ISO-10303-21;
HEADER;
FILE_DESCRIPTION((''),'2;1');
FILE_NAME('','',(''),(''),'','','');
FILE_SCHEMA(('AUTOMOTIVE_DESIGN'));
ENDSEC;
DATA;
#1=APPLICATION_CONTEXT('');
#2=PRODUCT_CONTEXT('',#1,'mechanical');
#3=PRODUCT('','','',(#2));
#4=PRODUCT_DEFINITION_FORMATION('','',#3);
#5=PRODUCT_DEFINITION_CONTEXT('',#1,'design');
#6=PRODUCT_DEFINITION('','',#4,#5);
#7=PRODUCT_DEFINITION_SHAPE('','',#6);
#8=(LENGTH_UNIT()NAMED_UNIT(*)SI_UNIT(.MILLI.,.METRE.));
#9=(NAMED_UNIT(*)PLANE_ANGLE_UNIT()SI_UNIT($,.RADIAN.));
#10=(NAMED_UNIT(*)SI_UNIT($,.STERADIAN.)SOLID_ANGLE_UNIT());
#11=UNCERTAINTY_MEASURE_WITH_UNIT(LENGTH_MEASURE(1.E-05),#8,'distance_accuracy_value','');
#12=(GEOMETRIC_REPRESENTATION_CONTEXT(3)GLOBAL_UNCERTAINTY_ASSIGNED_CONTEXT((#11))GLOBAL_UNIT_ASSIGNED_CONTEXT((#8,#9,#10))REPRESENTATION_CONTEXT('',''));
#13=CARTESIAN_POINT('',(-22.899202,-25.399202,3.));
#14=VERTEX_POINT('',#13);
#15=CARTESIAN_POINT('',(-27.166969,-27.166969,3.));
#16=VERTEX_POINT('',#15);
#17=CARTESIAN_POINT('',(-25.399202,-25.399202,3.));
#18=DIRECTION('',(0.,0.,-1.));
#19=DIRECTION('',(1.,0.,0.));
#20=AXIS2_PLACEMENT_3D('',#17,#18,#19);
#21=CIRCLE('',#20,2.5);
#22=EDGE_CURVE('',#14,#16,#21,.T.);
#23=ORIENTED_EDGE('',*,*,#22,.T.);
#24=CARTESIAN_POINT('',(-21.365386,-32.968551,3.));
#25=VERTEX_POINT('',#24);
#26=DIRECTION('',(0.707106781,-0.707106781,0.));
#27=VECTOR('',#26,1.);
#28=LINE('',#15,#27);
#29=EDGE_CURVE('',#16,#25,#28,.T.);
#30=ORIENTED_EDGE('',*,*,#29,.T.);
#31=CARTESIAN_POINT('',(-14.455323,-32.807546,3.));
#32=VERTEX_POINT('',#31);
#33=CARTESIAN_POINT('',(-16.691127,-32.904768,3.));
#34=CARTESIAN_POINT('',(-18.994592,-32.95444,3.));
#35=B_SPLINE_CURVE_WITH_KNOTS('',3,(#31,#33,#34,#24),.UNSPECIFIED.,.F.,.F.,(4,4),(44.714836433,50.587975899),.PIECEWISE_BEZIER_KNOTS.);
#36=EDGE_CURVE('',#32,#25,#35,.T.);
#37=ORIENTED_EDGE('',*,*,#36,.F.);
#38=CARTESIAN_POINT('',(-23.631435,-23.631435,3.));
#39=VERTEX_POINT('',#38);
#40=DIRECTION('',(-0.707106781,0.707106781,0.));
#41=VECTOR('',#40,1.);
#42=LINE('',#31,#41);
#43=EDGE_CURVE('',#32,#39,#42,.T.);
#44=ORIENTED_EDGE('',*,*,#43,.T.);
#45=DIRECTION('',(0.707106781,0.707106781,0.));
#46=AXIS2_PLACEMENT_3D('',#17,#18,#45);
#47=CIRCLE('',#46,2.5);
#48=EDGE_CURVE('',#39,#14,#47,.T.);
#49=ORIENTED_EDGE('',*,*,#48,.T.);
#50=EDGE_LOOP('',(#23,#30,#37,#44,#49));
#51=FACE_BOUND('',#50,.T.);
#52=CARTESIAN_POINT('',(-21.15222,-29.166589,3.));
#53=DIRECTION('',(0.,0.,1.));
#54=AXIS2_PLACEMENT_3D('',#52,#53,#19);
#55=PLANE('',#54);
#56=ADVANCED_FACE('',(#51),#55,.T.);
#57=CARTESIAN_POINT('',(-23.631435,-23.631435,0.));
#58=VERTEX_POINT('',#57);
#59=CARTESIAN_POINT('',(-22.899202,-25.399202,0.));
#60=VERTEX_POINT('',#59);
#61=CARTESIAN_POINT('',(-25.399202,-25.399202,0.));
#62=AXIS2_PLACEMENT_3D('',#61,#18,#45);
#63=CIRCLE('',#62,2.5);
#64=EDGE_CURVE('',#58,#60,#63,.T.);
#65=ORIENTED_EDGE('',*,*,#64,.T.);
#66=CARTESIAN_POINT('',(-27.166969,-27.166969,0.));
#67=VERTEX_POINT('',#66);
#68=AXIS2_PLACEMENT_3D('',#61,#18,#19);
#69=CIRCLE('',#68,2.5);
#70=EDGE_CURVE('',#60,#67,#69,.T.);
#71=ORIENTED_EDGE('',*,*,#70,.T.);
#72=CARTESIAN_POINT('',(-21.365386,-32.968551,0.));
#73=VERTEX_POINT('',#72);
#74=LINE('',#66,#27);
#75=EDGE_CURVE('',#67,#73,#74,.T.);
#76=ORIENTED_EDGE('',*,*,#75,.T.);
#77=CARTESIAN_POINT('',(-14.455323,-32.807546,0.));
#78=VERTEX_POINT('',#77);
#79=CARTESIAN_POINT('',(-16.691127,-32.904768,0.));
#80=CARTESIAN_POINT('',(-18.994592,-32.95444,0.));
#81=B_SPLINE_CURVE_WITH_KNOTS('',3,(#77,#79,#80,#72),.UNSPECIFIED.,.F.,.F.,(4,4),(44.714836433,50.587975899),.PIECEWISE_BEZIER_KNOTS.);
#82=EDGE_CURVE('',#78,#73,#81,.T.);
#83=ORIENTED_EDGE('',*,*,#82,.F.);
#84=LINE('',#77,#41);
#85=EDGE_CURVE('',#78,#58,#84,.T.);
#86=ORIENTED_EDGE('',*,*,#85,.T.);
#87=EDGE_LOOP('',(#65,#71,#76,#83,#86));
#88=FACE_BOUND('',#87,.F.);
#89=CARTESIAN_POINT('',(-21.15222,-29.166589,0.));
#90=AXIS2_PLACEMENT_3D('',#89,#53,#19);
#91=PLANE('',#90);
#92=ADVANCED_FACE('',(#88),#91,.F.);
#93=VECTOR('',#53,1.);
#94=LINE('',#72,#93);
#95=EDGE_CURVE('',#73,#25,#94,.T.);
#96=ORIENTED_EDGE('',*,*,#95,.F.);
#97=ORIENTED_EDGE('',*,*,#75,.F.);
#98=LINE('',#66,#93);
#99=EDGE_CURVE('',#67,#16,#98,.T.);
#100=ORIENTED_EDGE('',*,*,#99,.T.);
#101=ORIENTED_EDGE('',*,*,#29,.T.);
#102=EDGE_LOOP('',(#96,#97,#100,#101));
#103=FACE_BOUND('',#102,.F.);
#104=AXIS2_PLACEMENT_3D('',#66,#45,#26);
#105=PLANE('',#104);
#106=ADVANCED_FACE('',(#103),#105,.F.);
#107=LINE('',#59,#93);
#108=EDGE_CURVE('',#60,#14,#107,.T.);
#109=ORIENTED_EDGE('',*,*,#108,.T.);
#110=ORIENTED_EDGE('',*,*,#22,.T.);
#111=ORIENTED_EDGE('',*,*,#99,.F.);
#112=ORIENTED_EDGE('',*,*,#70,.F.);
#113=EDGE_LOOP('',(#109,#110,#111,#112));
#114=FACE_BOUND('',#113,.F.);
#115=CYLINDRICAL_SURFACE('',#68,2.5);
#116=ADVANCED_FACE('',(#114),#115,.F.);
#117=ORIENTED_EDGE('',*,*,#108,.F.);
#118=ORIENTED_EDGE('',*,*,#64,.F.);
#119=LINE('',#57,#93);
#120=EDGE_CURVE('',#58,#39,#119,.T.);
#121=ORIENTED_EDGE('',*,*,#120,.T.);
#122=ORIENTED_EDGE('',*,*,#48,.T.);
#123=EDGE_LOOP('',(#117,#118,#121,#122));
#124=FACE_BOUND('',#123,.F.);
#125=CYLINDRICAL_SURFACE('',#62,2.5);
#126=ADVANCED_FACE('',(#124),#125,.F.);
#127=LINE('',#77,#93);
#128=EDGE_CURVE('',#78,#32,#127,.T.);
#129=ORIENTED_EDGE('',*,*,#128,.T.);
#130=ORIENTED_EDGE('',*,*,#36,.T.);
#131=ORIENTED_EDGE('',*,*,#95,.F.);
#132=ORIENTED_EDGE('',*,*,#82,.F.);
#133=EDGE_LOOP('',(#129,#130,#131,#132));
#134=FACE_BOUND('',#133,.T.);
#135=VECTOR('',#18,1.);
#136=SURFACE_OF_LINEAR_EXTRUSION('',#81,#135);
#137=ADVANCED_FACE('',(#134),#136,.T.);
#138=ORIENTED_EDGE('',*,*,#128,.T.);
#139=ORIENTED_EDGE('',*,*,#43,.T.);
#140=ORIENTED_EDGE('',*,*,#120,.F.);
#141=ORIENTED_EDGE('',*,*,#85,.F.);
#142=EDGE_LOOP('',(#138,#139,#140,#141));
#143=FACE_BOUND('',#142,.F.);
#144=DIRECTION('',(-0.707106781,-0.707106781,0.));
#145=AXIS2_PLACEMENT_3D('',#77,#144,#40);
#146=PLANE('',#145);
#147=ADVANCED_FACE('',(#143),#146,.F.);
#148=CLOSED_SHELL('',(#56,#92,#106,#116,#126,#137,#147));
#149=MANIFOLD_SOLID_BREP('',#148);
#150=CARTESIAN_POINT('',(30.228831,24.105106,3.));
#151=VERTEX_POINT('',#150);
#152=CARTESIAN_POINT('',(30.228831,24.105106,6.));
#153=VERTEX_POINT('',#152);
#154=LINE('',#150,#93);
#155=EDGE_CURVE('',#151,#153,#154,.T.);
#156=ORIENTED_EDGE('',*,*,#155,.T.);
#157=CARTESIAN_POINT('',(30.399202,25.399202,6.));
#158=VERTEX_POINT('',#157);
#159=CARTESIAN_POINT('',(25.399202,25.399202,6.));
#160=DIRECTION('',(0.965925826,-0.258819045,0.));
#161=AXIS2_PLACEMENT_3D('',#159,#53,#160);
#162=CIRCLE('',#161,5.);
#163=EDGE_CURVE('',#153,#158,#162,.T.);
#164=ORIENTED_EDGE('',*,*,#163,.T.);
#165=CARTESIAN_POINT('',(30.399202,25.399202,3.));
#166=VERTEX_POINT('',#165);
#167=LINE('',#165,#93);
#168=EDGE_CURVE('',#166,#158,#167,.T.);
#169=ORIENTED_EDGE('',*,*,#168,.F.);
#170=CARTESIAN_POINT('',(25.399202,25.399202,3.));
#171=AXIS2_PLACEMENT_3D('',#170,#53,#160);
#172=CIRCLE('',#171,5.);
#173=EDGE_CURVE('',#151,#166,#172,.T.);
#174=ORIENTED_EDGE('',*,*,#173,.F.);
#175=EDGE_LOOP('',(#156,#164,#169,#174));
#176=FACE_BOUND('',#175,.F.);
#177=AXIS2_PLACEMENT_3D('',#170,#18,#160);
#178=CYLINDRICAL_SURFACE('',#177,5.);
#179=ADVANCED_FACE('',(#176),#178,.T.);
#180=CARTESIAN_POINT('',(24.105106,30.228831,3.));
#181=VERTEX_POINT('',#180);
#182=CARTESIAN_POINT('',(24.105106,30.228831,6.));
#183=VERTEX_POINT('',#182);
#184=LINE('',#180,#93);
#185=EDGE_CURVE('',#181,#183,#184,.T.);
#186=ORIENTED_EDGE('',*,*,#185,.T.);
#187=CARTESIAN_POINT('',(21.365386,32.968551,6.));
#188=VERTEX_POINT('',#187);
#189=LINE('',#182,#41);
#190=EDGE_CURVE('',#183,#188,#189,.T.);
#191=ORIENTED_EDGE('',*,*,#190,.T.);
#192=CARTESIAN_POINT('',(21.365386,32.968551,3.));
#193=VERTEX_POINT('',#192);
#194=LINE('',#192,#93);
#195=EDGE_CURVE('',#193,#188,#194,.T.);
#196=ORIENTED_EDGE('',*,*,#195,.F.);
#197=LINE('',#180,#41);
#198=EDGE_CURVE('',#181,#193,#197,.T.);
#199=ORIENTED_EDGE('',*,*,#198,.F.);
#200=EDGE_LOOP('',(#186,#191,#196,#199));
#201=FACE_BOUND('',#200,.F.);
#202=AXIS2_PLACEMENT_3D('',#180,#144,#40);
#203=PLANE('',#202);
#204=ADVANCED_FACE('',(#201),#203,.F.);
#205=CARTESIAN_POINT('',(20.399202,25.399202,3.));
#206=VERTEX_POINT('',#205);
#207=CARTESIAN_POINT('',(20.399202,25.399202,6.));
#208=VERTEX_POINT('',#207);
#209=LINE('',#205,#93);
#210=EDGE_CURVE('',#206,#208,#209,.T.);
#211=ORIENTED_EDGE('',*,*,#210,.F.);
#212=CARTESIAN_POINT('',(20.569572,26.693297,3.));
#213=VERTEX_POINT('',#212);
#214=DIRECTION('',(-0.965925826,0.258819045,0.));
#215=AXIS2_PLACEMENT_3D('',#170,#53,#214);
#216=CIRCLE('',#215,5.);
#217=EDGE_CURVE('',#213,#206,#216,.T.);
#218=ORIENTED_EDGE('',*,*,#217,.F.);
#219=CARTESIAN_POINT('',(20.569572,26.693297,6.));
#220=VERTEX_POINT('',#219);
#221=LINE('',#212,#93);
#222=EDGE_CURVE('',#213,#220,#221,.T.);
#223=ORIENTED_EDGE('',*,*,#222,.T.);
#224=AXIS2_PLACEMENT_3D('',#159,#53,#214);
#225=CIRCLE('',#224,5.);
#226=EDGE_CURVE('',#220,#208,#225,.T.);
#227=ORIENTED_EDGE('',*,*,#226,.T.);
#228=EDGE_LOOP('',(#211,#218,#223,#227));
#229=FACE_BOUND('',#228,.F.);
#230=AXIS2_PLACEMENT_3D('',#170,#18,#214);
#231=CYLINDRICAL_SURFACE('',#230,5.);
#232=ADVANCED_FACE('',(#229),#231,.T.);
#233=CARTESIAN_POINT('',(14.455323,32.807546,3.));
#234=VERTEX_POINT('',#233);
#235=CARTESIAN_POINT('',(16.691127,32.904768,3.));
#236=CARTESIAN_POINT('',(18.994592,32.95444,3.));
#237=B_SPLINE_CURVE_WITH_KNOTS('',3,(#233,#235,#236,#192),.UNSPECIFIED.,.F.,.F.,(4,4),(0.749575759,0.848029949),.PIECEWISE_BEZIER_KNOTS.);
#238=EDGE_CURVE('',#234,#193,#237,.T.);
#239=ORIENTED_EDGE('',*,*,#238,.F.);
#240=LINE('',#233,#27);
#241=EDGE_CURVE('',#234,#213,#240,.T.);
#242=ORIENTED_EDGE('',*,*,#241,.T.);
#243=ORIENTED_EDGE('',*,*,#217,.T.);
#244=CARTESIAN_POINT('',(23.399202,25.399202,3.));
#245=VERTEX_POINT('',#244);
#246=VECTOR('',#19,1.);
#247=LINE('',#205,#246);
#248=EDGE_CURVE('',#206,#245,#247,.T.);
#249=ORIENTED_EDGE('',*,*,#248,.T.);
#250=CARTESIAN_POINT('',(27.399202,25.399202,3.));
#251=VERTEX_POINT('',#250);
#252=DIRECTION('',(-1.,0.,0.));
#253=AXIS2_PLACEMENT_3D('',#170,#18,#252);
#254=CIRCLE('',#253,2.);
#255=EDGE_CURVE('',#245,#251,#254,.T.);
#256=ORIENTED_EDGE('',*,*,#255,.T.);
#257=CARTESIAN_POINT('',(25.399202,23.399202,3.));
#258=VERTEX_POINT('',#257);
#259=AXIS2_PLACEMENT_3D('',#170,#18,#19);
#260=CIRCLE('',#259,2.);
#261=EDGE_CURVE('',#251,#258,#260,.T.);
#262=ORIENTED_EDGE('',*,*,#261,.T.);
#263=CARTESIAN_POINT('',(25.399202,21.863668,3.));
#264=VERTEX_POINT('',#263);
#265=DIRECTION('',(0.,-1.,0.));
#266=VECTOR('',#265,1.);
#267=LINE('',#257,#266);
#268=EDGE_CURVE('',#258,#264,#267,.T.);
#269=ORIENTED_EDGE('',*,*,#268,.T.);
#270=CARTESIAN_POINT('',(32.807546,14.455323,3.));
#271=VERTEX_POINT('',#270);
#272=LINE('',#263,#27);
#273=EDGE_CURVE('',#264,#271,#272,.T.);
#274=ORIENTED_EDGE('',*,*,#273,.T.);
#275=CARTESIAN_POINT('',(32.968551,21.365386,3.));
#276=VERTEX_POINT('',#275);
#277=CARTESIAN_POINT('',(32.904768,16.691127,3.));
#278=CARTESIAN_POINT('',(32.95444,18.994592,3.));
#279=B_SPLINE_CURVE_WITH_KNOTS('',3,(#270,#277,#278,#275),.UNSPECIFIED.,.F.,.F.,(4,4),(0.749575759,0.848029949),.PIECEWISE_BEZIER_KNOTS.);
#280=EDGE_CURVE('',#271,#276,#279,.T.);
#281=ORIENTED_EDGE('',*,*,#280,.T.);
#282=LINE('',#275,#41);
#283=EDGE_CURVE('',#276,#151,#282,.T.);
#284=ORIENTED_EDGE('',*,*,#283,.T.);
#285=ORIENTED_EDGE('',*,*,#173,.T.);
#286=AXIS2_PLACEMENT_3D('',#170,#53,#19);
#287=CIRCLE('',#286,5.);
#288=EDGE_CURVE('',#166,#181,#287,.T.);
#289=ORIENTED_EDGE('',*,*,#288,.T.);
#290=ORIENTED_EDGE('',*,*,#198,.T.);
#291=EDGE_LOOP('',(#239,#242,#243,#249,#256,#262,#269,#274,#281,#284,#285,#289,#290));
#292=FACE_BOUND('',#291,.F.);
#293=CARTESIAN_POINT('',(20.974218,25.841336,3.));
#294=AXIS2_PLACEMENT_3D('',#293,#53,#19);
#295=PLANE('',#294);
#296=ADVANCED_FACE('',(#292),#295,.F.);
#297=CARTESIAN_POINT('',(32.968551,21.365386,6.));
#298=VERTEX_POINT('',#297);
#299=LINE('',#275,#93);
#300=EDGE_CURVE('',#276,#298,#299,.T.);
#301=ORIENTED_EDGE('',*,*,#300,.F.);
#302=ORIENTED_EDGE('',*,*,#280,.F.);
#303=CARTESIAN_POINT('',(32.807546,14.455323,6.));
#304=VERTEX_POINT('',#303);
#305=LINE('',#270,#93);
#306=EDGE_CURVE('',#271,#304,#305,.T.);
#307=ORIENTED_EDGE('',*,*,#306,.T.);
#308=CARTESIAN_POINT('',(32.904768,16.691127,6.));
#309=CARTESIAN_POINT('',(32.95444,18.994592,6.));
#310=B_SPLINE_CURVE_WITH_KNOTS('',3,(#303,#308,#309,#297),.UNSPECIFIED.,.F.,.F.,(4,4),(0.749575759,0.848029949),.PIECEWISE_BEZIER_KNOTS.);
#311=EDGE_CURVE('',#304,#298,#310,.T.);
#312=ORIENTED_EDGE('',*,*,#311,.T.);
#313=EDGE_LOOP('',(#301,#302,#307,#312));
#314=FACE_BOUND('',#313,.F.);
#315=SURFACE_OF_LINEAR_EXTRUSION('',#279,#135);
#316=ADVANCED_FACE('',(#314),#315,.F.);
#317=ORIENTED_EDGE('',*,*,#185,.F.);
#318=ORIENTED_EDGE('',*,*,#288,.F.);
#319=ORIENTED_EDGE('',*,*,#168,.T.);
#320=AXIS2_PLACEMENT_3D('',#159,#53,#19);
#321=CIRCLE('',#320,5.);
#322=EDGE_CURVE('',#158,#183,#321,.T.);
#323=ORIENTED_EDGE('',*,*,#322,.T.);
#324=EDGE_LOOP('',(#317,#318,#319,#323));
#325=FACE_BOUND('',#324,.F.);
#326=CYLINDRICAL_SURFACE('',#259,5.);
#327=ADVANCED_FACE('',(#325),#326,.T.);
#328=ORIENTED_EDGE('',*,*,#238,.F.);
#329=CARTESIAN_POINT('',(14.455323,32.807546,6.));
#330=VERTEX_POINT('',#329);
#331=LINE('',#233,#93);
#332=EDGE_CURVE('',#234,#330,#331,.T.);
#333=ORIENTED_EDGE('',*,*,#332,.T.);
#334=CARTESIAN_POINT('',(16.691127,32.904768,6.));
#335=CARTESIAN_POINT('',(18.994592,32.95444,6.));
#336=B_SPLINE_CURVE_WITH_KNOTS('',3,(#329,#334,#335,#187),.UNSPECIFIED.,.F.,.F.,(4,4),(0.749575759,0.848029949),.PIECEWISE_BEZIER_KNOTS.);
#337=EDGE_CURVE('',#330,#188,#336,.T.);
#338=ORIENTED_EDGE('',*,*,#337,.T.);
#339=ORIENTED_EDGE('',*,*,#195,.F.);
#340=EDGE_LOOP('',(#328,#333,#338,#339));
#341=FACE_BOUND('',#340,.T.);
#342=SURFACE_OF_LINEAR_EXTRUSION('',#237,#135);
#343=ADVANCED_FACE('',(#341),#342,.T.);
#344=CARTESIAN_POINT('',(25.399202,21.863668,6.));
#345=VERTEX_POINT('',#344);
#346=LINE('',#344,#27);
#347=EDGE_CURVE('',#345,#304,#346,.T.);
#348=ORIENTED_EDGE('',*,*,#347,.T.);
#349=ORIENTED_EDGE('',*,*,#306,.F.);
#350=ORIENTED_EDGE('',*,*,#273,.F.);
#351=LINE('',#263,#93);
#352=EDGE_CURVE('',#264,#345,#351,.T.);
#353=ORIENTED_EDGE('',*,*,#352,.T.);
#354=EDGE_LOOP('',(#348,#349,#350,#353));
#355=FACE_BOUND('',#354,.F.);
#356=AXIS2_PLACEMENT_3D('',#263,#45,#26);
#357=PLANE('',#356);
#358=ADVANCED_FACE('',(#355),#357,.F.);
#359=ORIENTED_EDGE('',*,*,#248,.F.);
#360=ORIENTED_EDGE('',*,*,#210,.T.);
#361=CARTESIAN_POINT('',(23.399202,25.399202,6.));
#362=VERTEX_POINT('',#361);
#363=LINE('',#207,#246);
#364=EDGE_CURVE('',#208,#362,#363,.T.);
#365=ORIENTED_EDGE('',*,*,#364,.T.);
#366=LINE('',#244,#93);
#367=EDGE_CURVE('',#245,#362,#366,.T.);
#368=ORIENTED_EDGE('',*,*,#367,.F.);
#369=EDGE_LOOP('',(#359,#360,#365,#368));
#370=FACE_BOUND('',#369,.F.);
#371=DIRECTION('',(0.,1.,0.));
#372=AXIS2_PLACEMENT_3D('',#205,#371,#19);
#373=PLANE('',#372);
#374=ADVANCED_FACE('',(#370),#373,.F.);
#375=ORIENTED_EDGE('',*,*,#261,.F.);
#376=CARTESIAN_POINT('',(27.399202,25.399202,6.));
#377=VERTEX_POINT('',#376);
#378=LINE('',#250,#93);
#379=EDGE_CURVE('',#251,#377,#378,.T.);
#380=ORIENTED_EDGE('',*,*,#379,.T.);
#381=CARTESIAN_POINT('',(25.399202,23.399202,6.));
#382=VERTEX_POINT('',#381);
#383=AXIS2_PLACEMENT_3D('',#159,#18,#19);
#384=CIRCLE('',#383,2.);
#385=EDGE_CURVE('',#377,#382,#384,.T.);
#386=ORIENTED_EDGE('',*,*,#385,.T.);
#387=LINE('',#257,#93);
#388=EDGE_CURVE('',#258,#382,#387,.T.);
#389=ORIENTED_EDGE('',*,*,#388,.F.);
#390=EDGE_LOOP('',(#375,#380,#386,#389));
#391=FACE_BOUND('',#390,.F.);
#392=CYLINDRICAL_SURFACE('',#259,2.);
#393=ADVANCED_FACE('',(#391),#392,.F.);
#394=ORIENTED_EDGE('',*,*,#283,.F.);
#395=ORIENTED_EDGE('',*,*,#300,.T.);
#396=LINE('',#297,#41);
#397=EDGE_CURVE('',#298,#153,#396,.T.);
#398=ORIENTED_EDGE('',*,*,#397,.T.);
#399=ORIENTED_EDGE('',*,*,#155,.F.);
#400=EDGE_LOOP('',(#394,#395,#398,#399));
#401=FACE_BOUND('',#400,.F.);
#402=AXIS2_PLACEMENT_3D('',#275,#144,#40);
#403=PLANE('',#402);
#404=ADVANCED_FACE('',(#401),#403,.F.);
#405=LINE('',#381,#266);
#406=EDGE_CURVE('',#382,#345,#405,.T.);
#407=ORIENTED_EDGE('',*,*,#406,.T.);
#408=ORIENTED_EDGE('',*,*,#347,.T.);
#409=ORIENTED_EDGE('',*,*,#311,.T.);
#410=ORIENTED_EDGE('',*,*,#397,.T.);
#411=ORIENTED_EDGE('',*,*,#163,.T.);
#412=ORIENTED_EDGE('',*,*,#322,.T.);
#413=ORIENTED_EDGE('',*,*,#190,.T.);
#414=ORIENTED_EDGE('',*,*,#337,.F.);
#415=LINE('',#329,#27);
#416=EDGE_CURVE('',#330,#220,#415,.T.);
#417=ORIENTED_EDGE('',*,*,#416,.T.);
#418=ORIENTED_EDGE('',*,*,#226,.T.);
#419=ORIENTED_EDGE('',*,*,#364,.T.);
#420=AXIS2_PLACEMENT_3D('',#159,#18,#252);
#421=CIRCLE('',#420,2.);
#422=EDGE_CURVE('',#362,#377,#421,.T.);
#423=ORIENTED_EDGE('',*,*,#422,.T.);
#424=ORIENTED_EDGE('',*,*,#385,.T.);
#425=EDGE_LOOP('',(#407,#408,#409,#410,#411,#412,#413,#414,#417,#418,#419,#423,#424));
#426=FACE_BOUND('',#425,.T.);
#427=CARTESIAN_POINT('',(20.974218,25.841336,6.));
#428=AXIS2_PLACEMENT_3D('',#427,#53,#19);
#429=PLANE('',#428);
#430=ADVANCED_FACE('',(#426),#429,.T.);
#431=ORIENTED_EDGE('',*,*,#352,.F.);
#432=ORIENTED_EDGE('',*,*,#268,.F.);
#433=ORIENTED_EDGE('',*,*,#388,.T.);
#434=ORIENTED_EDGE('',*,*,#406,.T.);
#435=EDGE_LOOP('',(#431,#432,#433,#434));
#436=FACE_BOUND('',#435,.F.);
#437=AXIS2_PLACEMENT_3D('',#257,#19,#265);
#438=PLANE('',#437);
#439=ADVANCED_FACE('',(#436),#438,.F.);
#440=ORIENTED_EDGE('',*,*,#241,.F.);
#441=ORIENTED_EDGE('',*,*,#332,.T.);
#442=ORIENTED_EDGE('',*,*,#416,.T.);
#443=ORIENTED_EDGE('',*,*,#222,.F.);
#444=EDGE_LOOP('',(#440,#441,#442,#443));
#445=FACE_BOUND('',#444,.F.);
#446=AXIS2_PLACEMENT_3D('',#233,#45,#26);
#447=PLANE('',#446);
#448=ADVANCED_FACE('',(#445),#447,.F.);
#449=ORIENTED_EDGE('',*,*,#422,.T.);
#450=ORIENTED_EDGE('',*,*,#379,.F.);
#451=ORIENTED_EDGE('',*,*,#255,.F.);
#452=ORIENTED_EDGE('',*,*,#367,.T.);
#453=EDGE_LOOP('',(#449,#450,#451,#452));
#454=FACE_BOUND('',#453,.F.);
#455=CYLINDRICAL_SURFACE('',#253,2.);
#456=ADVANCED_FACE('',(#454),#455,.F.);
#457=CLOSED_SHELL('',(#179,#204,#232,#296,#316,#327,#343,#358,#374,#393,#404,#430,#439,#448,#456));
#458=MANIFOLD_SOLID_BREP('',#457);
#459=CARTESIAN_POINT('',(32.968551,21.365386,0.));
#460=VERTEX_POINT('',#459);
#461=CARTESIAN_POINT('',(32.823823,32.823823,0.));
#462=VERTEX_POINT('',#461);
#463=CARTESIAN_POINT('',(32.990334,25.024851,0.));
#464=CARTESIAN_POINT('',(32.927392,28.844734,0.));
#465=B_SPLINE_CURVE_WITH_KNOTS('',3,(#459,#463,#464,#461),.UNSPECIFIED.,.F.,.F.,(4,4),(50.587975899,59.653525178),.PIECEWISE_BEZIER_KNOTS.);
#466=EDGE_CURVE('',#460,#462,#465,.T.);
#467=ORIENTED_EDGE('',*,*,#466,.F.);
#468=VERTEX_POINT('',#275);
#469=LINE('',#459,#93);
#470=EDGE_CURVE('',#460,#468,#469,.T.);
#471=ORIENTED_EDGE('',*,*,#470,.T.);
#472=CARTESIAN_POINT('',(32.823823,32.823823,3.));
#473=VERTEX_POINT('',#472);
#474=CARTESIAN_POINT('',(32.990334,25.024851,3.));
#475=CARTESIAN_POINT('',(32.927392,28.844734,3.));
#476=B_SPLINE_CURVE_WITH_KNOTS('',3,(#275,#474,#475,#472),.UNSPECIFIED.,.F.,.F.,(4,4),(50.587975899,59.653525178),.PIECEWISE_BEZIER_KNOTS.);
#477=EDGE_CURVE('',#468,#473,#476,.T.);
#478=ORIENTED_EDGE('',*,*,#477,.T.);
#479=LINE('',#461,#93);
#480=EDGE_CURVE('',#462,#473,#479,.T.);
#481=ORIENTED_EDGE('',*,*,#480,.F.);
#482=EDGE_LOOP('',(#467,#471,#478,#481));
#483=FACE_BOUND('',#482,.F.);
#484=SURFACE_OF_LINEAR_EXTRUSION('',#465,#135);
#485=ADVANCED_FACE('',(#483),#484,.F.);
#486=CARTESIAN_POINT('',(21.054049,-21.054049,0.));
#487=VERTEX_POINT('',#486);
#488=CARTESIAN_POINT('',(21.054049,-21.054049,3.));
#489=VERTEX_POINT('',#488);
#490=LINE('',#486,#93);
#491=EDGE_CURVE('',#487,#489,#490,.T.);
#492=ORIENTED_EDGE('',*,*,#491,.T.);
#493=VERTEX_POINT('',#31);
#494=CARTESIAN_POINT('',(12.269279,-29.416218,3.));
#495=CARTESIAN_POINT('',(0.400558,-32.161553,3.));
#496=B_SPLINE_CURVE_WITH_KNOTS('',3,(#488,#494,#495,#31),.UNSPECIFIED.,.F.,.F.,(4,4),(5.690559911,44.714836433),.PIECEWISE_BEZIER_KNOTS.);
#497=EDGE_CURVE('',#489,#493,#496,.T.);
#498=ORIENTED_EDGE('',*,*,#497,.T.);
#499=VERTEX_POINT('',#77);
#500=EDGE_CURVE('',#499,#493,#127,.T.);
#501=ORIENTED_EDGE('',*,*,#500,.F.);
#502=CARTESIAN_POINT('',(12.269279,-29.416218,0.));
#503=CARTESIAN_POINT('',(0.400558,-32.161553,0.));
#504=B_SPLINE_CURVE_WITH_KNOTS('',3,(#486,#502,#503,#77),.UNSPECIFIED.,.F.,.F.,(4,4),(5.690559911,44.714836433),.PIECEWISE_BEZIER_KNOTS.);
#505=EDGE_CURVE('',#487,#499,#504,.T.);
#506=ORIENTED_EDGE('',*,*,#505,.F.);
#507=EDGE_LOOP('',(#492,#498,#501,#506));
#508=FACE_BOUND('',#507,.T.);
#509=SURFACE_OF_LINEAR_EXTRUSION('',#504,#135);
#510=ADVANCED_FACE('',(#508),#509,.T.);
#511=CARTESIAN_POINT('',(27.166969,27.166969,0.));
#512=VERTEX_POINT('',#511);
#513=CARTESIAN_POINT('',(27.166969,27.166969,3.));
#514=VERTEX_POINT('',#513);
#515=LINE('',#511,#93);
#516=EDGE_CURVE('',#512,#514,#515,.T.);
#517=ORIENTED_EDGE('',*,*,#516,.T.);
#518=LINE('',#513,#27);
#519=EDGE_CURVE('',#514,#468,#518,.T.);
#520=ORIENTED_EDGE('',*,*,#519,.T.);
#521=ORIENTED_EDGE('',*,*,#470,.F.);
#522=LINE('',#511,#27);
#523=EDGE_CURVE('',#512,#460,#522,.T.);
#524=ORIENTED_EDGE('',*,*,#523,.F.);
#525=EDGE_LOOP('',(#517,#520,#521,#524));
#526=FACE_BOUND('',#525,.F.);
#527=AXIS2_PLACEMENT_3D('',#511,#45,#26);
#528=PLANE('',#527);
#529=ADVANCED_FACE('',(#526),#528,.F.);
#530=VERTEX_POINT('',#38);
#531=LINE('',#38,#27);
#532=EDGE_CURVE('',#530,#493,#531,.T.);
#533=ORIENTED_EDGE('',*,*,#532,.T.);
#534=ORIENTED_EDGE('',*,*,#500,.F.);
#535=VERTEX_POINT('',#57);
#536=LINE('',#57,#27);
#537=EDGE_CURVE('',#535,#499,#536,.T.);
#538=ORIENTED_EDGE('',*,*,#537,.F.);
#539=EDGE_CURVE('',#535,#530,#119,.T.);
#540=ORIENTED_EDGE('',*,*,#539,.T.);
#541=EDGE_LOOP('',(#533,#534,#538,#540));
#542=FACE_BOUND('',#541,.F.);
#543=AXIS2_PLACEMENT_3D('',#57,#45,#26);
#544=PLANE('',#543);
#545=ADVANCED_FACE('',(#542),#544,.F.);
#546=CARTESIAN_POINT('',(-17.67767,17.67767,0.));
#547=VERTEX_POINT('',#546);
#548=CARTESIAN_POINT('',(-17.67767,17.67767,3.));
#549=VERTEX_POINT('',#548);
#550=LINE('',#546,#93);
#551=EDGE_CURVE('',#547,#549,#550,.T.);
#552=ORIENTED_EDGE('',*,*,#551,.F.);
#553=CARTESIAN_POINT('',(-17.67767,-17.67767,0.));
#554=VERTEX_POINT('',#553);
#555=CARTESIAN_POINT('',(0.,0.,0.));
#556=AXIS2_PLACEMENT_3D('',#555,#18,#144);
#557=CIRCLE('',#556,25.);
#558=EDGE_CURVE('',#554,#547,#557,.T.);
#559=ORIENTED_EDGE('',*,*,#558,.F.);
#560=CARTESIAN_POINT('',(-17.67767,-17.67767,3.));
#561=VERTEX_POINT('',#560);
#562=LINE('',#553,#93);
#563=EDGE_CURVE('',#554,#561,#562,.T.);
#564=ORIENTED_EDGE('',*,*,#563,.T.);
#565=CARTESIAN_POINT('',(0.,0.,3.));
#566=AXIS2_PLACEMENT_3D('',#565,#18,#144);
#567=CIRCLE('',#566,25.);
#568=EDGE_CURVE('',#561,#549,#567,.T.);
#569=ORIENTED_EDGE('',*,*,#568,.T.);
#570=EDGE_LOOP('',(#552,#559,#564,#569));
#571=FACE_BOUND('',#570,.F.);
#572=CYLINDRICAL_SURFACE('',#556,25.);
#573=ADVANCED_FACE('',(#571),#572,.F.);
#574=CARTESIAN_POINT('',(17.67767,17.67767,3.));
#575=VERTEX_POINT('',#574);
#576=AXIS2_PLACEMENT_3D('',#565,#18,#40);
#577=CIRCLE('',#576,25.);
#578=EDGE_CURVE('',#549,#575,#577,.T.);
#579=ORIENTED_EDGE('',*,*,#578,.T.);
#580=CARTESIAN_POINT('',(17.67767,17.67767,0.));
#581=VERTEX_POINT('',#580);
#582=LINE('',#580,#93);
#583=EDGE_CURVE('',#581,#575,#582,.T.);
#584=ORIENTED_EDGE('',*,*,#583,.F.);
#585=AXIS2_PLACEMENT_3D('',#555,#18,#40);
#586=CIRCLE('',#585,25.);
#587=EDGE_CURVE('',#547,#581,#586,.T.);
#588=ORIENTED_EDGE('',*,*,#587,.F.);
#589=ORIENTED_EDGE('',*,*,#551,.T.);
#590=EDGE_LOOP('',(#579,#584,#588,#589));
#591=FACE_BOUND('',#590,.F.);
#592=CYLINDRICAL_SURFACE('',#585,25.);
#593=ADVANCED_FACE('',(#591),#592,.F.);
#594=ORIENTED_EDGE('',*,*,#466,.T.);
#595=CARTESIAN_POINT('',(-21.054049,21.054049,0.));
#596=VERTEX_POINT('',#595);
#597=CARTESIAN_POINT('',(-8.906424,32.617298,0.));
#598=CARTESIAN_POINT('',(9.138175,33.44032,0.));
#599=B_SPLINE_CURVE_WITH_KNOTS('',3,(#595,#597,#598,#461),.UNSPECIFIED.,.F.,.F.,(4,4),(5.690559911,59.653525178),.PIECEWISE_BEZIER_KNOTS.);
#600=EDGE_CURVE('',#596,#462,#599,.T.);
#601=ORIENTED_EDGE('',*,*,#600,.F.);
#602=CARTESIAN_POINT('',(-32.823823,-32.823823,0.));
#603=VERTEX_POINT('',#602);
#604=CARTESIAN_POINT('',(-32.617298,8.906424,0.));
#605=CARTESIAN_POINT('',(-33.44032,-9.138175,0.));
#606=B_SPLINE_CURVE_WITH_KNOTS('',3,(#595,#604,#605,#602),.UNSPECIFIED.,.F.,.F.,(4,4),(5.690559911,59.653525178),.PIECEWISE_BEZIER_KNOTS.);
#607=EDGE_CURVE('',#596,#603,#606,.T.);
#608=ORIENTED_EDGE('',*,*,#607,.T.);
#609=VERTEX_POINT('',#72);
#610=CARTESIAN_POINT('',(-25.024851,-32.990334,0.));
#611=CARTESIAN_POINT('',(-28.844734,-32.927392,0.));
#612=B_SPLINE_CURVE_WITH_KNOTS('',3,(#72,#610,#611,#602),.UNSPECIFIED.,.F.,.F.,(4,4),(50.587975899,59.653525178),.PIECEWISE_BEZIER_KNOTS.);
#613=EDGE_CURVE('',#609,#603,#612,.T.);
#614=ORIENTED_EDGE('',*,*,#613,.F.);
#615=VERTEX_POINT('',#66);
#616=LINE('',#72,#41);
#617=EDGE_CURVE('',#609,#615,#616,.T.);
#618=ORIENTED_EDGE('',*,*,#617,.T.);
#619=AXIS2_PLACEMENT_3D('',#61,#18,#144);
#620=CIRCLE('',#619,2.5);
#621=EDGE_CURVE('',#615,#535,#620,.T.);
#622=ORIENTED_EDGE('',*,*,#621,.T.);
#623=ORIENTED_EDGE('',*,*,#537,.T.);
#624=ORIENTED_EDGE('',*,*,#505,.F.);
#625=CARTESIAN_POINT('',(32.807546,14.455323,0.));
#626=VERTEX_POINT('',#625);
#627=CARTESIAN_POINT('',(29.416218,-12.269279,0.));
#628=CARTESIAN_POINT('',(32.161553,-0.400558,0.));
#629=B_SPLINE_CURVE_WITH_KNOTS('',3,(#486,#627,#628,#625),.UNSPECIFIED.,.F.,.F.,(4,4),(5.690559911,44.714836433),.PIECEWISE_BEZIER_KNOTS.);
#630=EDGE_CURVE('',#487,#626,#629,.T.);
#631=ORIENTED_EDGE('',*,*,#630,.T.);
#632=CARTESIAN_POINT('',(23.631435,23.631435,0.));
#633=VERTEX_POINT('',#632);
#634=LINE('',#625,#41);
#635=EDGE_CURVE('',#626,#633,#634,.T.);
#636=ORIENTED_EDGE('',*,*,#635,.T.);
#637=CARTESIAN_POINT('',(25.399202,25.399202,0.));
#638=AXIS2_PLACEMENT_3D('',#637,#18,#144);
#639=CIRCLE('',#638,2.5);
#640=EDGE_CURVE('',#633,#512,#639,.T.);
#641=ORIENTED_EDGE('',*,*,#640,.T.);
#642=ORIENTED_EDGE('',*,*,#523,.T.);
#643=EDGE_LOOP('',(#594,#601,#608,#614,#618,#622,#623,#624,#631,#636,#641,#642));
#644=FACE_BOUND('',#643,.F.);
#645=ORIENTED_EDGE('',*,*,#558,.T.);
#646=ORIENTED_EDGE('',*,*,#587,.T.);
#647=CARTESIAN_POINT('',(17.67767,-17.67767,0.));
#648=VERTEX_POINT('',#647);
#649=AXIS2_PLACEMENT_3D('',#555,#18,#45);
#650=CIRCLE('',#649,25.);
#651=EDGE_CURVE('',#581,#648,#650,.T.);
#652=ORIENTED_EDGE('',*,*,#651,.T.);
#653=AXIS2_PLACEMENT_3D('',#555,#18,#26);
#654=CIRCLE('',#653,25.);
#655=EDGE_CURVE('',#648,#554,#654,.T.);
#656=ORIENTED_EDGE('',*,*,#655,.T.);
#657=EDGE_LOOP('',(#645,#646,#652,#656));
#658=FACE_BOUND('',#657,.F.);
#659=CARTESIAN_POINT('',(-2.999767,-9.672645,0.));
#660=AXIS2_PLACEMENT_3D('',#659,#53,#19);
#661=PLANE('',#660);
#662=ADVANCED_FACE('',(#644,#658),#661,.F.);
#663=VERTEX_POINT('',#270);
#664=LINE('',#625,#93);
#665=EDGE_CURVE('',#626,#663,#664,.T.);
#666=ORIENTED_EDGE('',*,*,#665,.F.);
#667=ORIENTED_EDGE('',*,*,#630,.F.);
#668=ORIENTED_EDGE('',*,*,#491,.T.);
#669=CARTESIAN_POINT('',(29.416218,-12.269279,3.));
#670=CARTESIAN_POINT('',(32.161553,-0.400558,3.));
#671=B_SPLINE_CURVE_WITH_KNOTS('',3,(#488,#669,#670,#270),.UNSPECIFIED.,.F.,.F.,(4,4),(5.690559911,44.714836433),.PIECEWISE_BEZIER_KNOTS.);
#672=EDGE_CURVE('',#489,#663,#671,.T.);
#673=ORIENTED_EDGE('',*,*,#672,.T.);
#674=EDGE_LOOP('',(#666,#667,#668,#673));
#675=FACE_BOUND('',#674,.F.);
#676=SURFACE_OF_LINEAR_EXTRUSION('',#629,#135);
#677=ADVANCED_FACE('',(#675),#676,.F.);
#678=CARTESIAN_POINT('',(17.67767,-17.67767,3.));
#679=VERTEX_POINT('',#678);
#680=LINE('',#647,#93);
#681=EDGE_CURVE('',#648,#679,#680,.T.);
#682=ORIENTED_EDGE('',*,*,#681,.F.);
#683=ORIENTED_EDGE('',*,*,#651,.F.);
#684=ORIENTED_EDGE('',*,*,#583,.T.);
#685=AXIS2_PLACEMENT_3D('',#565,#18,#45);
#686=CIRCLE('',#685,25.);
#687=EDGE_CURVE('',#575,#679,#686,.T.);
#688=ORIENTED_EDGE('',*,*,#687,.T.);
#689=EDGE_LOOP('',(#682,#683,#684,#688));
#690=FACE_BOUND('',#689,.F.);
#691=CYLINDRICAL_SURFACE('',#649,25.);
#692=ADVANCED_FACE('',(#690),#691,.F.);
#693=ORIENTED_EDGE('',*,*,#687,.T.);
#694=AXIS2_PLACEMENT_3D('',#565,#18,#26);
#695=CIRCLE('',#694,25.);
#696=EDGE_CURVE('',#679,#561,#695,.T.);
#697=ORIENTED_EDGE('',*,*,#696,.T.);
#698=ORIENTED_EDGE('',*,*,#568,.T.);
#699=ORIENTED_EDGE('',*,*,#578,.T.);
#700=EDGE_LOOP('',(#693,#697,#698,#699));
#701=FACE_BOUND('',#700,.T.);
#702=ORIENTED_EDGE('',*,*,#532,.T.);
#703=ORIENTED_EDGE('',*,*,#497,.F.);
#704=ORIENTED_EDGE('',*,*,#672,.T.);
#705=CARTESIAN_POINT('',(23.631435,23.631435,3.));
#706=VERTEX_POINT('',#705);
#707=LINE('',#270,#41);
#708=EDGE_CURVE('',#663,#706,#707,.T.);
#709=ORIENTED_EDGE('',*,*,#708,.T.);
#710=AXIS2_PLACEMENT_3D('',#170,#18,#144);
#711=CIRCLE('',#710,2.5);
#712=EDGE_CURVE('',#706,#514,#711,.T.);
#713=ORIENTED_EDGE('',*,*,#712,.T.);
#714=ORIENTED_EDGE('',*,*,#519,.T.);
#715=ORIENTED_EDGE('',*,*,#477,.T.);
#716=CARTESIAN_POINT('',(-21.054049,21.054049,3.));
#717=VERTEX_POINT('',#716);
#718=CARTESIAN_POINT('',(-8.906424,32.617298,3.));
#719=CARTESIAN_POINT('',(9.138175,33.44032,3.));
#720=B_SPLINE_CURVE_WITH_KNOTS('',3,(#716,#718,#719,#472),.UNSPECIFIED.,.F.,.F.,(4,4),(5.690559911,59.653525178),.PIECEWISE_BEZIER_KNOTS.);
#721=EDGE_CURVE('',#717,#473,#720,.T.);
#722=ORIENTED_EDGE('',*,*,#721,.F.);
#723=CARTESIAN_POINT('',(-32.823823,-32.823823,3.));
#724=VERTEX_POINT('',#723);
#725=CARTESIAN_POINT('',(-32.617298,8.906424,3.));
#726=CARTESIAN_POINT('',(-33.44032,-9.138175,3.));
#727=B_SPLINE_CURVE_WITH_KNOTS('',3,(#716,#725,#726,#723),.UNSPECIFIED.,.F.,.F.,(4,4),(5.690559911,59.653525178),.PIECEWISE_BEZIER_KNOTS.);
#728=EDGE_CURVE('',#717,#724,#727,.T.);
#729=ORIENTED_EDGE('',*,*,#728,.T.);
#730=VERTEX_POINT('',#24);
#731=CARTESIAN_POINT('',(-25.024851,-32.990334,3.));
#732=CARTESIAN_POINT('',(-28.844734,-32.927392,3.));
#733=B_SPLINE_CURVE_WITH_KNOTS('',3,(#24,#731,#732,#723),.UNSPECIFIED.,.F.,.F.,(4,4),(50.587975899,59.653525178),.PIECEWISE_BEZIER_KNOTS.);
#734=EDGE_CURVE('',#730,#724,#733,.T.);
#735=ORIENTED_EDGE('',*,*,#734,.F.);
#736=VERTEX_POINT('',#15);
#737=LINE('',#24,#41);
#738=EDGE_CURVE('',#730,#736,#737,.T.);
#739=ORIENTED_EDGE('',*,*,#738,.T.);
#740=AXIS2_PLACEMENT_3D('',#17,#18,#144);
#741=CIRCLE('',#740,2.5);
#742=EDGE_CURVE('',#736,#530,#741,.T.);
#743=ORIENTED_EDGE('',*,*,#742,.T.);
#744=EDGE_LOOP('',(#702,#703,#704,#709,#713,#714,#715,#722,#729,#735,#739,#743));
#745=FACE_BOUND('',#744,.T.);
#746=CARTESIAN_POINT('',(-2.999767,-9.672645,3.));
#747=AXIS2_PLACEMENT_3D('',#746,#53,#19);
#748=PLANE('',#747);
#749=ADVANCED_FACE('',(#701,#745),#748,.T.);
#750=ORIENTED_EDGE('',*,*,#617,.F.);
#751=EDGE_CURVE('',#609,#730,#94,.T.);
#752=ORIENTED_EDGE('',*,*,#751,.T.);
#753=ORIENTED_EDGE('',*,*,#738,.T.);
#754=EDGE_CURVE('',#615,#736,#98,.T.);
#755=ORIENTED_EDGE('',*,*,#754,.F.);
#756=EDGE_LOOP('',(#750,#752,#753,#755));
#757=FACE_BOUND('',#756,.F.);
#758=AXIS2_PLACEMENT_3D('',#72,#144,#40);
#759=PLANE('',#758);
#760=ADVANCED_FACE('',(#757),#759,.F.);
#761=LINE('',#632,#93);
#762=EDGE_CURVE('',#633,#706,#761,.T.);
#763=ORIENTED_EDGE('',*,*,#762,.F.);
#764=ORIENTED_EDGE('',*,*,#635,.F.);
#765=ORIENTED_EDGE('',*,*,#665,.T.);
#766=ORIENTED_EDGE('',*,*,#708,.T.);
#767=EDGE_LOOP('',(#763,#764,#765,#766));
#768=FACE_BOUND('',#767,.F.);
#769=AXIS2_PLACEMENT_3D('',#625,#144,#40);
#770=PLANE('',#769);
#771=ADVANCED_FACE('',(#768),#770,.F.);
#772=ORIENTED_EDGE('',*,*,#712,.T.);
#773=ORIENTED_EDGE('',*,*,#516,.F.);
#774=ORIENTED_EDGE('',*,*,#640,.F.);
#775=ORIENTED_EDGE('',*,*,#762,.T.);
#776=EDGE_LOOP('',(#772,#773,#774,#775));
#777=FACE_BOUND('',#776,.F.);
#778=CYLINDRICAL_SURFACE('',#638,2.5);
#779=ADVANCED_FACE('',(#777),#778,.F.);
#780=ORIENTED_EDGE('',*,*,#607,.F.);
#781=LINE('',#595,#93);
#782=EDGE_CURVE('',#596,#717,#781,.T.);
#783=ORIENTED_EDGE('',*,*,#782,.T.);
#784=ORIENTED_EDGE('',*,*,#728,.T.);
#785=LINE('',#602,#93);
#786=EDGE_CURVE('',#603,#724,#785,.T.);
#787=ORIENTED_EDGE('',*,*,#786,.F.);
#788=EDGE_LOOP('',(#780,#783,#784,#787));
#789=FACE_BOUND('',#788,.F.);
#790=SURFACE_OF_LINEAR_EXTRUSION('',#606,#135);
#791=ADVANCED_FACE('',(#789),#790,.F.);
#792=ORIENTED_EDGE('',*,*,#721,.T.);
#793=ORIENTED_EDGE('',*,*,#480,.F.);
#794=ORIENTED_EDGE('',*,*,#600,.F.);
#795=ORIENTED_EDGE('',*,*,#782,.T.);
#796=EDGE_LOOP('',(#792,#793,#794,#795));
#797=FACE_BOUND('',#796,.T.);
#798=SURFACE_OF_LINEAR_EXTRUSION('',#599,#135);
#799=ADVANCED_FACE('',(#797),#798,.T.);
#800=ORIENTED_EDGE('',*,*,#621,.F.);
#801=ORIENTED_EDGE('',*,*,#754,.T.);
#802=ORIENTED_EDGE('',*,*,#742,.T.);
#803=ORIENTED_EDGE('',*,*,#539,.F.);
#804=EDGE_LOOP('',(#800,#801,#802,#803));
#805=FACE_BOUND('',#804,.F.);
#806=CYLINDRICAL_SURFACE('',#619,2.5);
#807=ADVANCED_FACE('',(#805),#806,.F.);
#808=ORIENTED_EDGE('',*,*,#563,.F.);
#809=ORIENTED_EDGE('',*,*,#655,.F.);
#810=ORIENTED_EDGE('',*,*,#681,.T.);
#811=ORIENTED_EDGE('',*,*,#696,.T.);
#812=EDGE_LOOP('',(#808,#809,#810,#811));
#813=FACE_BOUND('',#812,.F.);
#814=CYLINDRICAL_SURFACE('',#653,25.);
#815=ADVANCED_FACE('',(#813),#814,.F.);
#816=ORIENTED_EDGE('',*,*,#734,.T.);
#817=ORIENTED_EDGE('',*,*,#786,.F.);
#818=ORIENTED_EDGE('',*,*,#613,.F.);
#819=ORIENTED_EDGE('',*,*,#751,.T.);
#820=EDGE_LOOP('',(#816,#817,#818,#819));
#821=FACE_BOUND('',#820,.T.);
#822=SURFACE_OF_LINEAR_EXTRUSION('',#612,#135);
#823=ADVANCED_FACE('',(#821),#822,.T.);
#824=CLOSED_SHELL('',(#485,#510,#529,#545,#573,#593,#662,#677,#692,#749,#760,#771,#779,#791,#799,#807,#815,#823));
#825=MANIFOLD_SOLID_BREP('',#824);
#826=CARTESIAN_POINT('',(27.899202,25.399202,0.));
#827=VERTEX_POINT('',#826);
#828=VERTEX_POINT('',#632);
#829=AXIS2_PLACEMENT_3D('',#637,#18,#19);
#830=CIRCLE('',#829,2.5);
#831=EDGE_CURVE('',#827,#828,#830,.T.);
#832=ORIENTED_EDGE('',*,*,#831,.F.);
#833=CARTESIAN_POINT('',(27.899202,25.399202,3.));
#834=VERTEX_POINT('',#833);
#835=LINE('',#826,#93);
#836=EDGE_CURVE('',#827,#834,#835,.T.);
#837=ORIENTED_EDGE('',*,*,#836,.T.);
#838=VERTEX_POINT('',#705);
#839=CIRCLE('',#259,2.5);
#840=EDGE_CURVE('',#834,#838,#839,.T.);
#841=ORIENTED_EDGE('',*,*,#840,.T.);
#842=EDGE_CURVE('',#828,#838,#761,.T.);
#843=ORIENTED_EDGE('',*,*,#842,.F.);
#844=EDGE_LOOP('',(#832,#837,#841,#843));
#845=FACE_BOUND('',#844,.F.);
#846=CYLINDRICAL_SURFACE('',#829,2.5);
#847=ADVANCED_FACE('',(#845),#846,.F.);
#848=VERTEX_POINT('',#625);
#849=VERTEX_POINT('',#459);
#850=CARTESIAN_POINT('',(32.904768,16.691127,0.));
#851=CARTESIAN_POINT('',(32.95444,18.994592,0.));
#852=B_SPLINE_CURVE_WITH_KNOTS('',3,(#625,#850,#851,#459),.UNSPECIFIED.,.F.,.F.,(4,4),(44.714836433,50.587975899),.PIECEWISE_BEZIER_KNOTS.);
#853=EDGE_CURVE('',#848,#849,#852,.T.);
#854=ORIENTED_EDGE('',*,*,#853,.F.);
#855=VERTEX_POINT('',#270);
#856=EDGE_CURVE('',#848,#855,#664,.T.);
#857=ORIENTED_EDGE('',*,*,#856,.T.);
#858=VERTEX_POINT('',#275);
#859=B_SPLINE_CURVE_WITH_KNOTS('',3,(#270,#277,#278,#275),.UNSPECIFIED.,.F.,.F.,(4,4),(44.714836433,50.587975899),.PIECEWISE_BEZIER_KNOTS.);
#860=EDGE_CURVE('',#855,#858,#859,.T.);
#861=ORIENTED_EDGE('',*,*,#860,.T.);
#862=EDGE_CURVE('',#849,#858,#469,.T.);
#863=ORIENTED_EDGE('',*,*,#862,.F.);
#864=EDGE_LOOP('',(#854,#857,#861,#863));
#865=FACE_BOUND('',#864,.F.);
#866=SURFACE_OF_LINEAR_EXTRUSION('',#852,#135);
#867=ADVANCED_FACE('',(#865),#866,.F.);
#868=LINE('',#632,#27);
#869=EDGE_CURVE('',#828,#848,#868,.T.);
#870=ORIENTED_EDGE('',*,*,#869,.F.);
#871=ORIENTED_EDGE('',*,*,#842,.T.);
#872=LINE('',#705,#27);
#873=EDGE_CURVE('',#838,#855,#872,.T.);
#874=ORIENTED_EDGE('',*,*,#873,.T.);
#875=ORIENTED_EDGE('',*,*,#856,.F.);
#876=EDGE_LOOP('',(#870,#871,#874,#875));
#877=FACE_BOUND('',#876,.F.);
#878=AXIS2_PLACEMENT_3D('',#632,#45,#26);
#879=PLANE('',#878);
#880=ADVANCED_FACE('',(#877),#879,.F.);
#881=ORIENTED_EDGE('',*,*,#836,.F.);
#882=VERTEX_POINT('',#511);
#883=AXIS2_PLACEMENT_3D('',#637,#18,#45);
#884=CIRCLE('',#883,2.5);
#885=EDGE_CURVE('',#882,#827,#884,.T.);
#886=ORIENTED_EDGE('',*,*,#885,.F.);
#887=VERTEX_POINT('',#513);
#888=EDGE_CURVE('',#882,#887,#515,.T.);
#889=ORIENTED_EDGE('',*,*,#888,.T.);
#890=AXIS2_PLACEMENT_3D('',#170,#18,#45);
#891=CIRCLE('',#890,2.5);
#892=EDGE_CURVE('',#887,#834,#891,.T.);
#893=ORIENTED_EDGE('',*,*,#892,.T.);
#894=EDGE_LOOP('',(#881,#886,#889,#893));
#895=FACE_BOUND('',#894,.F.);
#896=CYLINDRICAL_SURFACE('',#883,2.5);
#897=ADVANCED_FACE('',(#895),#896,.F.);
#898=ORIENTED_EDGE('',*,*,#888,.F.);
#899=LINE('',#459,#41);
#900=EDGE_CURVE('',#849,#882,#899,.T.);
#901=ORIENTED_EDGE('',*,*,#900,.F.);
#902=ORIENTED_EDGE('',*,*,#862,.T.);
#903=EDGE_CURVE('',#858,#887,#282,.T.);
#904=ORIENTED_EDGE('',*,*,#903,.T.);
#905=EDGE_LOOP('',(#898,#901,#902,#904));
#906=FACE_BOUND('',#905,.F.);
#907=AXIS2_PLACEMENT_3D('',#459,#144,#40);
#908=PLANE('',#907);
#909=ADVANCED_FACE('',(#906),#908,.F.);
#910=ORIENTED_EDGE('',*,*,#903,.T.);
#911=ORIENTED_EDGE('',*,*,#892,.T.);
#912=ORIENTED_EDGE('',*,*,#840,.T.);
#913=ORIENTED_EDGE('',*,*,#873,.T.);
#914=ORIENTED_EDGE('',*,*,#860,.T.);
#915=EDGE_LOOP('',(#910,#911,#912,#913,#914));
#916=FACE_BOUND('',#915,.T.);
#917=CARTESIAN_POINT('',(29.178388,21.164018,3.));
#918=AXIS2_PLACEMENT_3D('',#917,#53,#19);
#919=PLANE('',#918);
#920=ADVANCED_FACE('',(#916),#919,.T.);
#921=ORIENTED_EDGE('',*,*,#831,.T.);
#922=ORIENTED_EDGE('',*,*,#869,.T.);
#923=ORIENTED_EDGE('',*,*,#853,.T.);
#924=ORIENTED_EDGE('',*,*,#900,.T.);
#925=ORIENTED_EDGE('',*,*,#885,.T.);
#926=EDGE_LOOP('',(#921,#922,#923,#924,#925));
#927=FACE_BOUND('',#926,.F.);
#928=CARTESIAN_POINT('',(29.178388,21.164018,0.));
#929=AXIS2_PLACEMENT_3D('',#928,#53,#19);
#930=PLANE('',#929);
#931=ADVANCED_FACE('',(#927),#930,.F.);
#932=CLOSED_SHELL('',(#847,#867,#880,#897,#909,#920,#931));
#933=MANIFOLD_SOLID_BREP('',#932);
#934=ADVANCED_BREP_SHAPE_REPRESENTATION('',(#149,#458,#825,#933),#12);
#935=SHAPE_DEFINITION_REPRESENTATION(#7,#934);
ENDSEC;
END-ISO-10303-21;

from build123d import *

# Parameters (mm, degrees)
F1_DEPTH = 3
F2_DEPTH = 3
F4_DEPTH = 3


with BuildPart() as f1:
    # F0 (on Top) → F1 (new body)
    with BuildSketch(Plane.XY):
        with BuildLine():
            Line((-17.6776695297, 17.6776695297), (-21.0540489196, 21.0540489196))
            add(Edge.make_bspline(
                [(-21.0540489196, 21.0540489196), (-32.6172978292, 8.9064244237), (-33.4403195997, -9.1381745127), (-32.823822752, -32.823822752)],
                knots=[5.6905599108, 5.6905599108, 5.6905599108, 5.6905599108, 59.653525178, 59.653525178, 59.653525178, 59.653525178], degree=3))
            add(Edge.make_bspline(
                [(-21.3653856494, -32.9685513557), (-25.0248508067, -32.9903335411), (-28.8447343113, -32.9273916076), (-32.823822752, -32.823822752)],
                knots=[50.5879758987, 50.5879758987, 50.5879758987, 50.5879758987, 59.653525178, 59.653525178, 59.653525178, 59.653525178], degree=3))
            Line((-21.3653856494, -32.9685513557), (-27.1669685025, -27.1669685025))
            ThreePointArc((-27.1669685025, -27.1669685025), (-27.1669685025, -23.6314345966), (-23.6314345966, -23.6314345966))
            Line((-23.6314345966, -23.6314345966), (-14.4553227676, -32.8075464256))
            add(Edge.make_bspline(
                [(21.0540489196, -21.0540489196), (12.269278567, -29.4162176905), (0.400558033, -32.1615526479), (-14.4553227676, -32.8075464256)],
                knots=[5.6905599108, 5.6905599108, 5.6905599108, 5.6905599108, 44.7148364329, 44.7148364329, 44.7148364329, 44.7148364329], degree=3))
            add(Edge.make_bspline(
                [(21.0540489196, -21.0540489196), (29.4162176905, -12.269278567), (32.1615526479, -0.400558033), (32.8075464256, 14.4553227676)],
                knots=[5.6905599108, 5.6905599108, 5.6905599108, 5.6905599108, 44.7148364329, 44.7148364329, 44.7148364329, 44.7148364329], degree=3))
            Line((32.8075464256, 14.4553227676), (23.6314345966, 23.6314345966))
            Line((23.6314345966, 23.6314345966), (17.6776695297, 17.6776695297))
            ThreePointArc((17.6776695297, 17.6776695297), (25, 0), (17.6776695297, -17.6776695297))
            ThreePointArc((17.6776695297, -17.6776695297), (0, -25), (-17.6776695297, -17.6776695297))
            ThreePointArc((-17.6776695297, -17.6776695297), (-25, 0), (-17.6776695297, 17.6776695297))
        make_face()
        with BuildLine():
            add(Edge.make_bspline(
                [(-21.0540489196, 21.0540489196), (-8.9064244237, 32.6172978292), (9.1381745127, 33.4403195997), (32.823822752, 32.823822752)],
                knots=[5.6905599108, 5.6905599108, 5.6905599108, 5.6905599108, 59.653525178, 59.653525178, 59.653525178, 59.653525178], degree=3))
            Line((-21.0540489196, 21.0540489196), (-17.6776695297, 17.6776695297))
            ThreePointArc((-17.6776695297, 17.6776695297), (0, 25), (17.6776695297, 17.6776695297))
            Line((17.6776695297, 17.6776695297), (23.6314345966, 23.6314345966))
            ThreePointArc((23.6314345966, 23.6314345966), (23.6314345966, 27.1669685025), (27.1669685025, 27.1669685025))
            Line((27.1669685025, 27.1669685025), (32.823822752, 32.823822752))
        make_face()
        with BuildLine():
            add(Edge.make_bspline(
                [(32.9685513557, 21.3653856494), (32.9903335411, 25.0248508067), (32.9273916076, 28.8447343113), (32.823822752, 32.823822752)],
                knots=[50.5879758987, 50.5879758987, 50.5879758987, 50.5879758987, 59.653525178, 59.653525178, 59.653525178, 59.653525178], degree=3))
            Line((32.823822752, 32.823822752), (27.1669685025, 27.1669685025))
            Line((27.1669685025, 27.1669685025), (32.9685513557, 21.3653856494))
        make_face()
    extrude(amount=F1_DEPTH)


with BuildPart() as f2:
    # F0 (on Top) → F2 (new body)
    with BuildSketch(Plane.XY):
        with BuildLine():
            Line((32.9685513557, 21.3653856494), (27.1669685025, 27.1669685025))
            ThreePointArc((27.1669685025, 27.1669685025), (27.7089003809, 26.3559101305), (27.8992015496, 25.3992015496))
            ThreePointArc((27.8992015496, 25.3992015496), (26.3559101305, 23.0895027183), (23.6314345966, 23.6314345966))
            Line((23.6314345966, 23.6314345966), (32.8075464256, 14.4553227676))
            add(Edge.make_bspline(
                [(32.8075464256, 14.4553227676), (32.9047682549, 16.6911274411), (32.9544397107, 18.9945917154), (32.9685513557, 21.3653856494)],
                knots=[44.7148364329, 44.7148364329, 44.7148364329, 44.7148364329, 50.5879758987, 50.5879758987, 50.5879758987, 50.5879758987], degree=3))
        make_face()
    extrude(amount=F2_DEPTH)


with BuildPart() as f2b:
    # F0 (on Top) → F2, piece 2 (new body)
    with BuildSketch(Plane.XY):
        with BuildLine():
            Line((-27.1669685025, -27.1669685025), (-21.3653856494, -32.9685513557))
            add(Edge.make_bspline(
                [(-14.4553227676, -32.8075464256), (-16.6911274411, -32.9047682549), (-18.9945917154, -32.9544397107), (-21.3653856494, -32.9685513557)],
                knots=[44.7148364329, 44.7148364329, 44.7148364329, 44.7148364329, 50.5879758987, 50.5879758987, 50.5879758987, 50.5879758987], degree=3))
            Line((-14.4553227676, -32.8075464256), (-23.6314345966, -23.6314345966))
            ThreePointArc((-23.6314345966, -23.6314345966), (-23.0895027183, -24.4424929687), (-22.8992015496, -25.3992015496))
            ThreePointArc((-22.8992015496, -25.3992015496), (-24.4424929687, -27.7089003809), (-27.1669685025, -27.1669685025))
        make_face()
    extrude(amount=F2_DEPTH)


with BuildPart() as f4:
    # F3 (on face) → F4 (new body)
    with BuildSketch(Plane.XY.offset(3)):
        with BuildLine():
            ThreePointArc((20.5695724181, 26.6932967751), (20.4419772427, 26.0518325107), (20.3992015496, 25.3992015496))
            Line((20.3992015496, 25.3992015496), (21.8636676436, 25.3992015496))
            Line((21.8636676436, 25.3992015496), (20.5695724181, 26.6932967751))
        make_face()
        with BuildLine():
            Line((25.3992015496, 21.8636676436), (26.6932967751, 20.5695724181))
            ThreePointArc((26.6932967751, 20.5695724181), (28.9347354555, 21.8636676436), (30.228830681, 24.1051063241))
            Line((30.228830681, 24.1051063241), (27.1669685025, 27.1669685025))
            ThreePointArc((27.1669685025, 27.1669685025), (24.4424929687, 27.7089003809), (22.8992015496, 25.3992015496))
            Line((22.8992015496, 25.3992015496), (23.3992015496, 25.3992015496))
            ThreePointArc((23.3992015496, 25.3992015496), (25.3992015496, 27.3992015496), (27.3992015496, 25.3992015496))
            ThreePointArc((27.3992015496, 25.3992015496), (26.8134151119, 23.9849879872), (25.3992015496, 23.3992015496))
            Line((25.3992015496, 23.3992015496), (25.3992015496, 21.8636676436))
        make_face()
        with BuildLine():
            ThreePointArc((30.228830681, 24.1051063241), (28.9347354555, 21.8636676436), (26.6932967751, 20.5695724181))
            Line((26.6932967751, 20.5695724181), (32.8075464256, 14.4553227676))
            add(Edge.make_bspline(
                [(32.8075464256, 14.4553227676), (32.9047682549, 16.6911274411), (32.9544397107, 18.9945917154), (32.9685513557, 21.3653856493)],
                knots=[0.7495757593, 0.7495757593, 0.7495757593, 0.7495757593, 0.8480299487, 0.8480299487, 0.8480299487, 0.8480299487], degree=3))
            Line((32.9685513557, 21.3653856494), (30.228830681, 24.1051063241))
        make_face()
        with BuildLine():
            Line((14.4553227676, 32.8075464256), (20.5695724181, 26.6932967751))
            ThreePointArc((20.5695724181, 26.6932967751), (21.8636676436, 28.9347354555), (24.1051063241, 30.228830681))
            Line((24.1051063241, 30.228830681), (21.3653856494, 32.9685513557))
            add(Edge.make_bspline(
                [(14.4553227676, 32.8075464256), (16.6911274411, 32.9047682549), (18.9945917154, 32.9544397107), (21.3653856493, 32.9685513557)],
                knots=[0.7495757593, 0.7495757593, 0.7495757593, 0.7495757593, 0.8480299487, 0.8480299487, 0.8480299487, 0.8480299487], degree=3))
        make_face()
        with BuildLine():
            ThreePointArc((24.1051063241, 30.228830681), (21.8636676436, 28.9347354555), (20.5695724181, 26.6932967751))
            Line((20.5695724181, 26.6932967751), (21.8636676436, 25.3992015496))
            Line((21.8636676436, 25.3992015496), (22.8992015496, 25.3992015496))
            ThreePointArc((22.8992015496, 25.3992015496), (24.4424929687, 27.7089003809), (27.1669685025, 27.1669685025))
            Line((27.1669685025, 27.1669685025), (24.1051063241, 30.228830681))
        make_face()
        with BuildLine():
            ThreePointArc((30.3992015496, 25.3992015496), (28.4430086946, 29.365968251), (24.1051063241, 30.228830681))
            Line((24.1051063241, 30.228830681), (27.1669685025, 27.1669685025))
            Line((27.1669685025, 27.1669685025), (30.228830681, 24.1051063241))
            ThreePointArc((30.228830681, 24.1051063241), (30.3564258564, 24.7465705885), (30.3992015496, 25.3992015496))
        make_face()
    extrude(amount=F4_DEPTH)


solid = Compound([f1.part, f2.part, f2b.part, f4.part])
